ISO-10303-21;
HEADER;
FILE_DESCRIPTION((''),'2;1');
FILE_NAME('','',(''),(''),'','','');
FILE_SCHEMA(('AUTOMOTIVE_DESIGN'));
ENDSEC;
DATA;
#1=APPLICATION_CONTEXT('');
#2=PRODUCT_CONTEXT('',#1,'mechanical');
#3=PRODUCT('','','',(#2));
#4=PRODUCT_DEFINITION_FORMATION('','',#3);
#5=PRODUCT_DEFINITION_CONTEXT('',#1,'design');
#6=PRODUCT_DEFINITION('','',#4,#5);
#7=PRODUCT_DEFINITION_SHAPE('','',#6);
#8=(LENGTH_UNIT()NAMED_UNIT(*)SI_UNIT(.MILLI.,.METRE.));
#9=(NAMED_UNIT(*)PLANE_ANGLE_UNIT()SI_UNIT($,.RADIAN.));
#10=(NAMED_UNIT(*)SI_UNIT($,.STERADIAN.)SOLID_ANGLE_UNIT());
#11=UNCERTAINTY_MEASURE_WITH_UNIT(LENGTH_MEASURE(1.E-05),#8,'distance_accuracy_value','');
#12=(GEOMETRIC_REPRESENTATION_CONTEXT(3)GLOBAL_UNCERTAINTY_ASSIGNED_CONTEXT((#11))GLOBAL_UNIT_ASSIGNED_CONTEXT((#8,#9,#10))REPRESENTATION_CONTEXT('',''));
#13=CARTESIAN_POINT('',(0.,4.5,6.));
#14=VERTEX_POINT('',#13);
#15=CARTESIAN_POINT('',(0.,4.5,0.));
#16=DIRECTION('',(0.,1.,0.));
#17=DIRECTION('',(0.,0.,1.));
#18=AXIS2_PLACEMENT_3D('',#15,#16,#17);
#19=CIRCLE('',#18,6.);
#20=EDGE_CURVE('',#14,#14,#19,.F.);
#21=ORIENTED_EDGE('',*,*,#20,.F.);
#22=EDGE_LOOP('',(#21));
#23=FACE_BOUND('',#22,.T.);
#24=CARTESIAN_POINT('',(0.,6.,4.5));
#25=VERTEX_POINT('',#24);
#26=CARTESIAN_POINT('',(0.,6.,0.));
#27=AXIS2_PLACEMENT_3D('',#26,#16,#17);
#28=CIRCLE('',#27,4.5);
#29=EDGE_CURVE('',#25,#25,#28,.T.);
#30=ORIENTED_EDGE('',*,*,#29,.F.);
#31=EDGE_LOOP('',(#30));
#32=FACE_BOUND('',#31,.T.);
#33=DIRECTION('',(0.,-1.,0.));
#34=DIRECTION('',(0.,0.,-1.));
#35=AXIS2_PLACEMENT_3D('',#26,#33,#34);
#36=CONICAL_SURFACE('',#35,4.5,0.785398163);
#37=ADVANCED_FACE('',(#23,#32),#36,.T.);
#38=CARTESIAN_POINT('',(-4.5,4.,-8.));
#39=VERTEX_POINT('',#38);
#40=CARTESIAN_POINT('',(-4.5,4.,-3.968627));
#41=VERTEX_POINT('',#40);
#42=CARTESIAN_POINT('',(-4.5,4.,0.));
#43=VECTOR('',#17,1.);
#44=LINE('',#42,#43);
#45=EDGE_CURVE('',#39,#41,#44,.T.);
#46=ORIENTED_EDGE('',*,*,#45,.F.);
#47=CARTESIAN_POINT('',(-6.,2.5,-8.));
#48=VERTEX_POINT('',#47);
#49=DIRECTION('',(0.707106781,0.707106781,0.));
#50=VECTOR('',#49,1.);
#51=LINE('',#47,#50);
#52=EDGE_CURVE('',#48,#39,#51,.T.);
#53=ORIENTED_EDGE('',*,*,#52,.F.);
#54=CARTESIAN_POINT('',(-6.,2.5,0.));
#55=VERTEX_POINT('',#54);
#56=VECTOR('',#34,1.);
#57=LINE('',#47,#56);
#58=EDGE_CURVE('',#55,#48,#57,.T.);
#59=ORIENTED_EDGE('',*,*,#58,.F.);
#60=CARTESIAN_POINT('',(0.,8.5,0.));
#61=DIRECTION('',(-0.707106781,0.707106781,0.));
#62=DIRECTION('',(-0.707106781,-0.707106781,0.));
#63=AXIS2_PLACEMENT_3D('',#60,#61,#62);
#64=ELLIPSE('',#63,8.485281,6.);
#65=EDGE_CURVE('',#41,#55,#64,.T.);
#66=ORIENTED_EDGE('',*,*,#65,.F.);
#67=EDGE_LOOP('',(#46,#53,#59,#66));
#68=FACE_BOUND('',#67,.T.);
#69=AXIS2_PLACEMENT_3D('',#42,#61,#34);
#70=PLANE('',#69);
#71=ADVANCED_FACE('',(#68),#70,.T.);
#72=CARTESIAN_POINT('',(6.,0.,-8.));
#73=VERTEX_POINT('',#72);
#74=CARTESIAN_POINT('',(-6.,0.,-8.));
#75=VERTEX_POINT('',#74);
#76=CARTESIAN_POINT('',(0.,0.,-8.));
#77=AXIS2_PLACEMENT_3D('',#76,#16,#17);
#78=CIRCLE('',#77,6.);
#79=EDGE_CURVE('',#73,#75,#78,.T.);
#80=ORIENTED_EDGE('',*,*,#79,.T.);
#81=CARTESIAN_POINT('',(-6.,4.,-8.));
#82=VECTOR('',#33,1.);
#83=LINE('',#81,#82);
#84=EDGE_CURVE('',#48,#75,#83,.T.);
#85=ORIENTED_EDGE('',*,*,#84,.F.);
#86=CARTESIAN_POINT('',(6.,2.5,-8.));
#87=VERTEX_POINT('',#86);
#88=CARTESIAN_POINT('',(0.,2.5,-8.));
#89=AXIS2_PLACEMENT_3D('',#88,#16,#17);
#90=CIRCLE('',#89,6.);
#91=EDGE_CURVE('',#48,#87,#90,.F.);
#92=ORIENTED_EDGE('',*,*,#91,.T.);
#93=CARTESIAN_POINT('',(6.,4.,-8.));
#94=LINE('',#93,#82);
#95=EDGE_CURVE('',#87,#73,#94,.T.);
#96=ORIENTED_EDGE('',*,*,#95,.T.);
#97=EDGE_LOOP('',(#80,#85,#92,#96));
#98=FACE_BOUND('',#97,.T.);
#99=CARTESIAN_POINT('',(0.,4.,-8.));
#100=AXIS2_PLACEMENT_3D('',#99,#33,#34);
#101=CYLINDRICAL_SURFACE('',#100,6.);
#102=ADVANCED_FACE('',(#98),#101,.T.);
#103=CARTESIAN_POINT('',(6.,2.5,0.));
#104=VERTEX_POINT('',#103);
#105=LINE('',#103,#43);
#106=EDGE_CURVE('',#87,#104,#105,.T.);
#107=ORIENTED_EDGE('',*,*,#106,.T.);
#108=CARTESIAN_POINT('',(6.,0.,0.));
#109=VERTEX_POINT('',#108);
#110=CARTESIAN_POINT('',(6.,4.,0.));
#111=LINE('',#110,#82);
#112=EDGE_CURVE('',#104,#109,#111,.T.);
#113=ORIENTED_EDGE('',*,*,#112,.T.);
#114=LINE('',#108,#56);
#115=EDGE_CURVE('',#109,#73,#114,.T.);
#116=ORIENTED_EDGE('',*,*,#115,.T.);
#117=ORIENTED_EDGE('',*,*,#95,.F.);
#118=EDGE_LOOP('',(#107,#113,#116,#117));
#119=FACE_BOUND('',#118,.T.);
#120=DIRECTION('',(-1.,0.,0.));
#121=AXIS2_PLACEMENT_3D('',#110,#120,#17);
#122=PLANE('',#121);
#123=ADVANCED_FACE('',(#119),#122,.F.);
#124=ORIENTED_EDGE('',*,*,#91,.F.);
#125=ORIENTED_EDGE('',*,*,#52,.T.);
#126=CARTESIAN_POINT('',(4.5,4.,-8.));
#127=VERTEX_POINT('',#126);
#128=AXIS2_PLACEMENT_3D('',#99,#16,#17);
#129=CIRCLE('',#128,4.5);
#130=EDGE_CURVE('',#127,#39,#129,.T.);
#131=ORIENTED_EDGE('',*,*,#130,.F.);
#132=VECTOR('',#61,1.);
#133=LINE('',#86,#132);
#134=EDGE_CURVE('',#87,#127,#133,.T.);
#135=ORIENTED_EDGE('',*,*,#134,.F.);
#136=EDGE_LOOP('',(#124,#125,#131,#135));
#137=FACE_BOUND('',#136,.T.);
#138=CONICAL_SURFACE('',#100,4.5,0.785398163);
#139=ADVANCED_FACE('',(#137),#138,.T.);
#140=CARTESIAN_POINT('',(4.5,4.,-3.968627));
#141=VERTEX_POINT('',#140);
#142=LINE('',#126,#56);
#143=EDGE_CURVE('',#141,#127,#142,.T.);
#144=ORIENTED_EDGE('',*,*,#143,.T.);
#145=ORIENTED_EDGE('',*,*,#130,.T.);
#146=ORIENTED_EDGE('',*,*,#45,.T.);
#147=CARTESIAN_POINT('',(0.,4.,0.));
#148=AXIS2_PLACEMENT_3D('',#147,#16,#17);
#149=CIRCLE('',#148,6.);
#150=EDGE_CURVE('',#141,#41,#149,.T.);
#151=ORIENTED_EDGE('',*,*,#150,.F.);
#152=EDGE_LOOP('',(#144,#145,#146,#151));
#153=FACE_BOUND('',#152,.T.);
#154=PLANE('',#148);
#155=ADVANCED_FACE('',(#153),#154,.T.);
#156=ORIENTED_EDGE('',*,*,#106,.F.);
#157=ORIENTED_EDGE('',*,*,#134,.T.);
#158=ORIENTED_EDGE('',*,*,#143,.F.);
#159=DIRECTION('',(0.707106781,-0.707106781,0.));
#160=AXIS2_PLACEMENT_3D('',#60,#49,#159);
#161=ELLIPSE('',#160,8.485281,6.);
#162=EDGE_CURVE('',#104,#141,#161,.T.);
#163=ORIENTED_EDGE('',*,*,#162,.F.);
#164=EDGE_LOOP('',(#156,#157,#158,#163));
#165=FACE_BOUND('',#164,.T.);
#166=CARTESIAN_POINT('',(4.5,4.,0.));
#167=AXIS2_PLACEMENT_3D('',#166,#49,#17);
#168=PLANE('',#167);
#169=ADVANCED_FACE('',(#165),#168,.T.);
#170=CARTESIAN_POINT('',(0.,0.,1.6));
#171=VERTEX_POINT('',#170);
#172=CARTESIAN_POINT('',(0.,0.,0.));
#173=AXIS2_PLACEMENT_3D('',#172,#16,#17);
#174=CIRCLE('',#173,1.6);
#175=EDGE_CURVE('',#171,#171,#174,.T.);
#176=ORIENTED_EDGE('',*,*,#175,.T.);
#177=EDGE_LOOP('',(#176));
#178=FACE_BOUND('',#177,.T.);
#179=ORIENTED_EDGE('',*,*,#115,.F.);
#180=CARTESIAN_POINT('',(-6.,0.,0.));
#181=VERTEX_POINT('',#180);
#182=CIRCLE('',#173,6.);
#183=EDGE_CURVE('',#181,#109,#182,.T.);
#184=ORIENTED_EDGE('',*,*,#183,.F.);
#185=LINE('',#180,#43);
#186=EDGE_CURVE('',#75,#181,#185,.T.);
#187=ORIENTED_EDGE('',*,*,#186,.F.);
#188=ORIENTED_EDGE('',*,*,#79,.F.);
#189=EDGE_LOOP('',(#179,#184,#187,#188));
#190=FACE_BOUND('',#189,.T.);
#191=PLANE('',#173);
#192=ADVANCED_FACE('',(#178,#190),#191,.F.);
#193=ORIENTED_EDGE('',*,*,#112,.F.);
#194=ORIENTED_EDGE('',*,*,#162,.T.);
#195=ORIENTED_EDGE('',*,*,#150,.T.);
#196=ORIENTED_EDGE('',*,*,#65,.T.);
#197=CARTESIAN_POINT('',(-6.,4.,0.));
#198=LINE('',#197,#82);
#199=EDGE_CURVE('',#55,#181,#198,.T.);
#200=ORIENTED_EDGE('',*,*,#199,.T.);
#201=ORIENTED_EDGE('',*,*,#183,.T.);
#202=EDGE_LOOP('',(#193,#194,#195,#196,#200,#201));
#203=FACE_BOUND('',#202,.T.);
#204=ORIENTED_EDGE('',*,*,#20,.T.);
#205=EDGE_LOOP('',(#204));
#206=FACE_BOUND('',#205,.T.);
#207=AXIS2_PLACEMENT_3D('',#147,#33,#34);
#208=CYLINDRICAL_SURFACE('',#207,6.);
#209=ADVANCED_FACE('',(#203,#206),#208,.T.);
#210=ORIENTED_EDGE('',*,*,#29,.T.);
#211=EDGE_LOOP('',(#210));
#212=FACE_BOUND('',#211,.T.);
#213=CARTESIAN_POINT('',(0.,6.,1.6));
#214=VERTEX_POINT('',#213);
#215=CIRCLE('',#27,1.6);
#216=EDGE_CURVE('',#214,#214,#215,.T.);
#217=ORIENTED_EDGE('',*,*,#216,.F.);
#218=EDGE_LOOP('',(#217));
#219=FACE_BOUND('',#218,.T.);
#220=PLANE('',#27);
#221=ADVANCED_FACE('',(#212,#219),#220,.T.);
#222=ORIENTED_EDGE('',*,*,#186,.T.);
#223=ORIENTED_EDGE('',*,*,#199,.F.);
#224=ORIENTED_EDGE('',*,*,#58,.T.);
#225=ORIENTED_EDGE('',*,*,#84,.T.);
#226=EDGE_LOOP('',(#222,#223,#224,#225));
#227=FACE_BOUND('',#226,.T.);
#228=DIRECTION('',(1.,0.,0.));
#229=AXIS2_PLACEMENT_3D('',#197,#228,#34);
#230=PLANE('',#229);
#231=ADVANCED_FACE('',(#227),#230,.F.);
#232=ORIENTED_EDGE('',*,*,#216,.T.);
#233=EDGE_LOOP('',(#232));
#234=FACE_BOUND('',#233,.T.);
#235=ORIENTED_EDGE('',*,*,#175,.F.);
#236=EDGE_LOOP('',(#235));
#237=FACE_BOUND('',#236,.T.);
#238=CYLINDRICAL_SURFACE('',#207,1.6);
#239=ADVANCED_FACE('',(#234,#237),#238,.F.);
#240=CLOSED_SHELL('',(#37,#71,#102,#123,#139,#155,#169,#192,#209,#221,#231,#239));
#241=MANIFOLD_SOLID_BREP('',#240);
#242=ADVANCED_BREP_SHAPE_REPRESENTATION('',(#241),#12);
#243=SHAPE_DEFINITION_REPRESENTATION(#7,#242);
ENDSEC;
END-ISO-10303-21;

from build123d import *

# Parameters (mm, degrees)
SKETCH1_R           = 1.6
BOSS_EXTRUDE1_DEPTH = 4
SKETCH2_R           = 6
SKETCH2_R_2         = 1.6
BOSS_EXTRUDE2_DEPTH = 2
CHAMFER1_SIZE       = 1.5


with BuildPart() as part:
    # Sketch1 → Boss-Extrude1 (new body)
    with BuildSketch(Plane(origin=(0, 0, 0), x_dir=(1, 0, 0), z_dir=(0, 1, 0))):
        with BuildLine():
            Line((-6, 0), (-6, 8))
            ThreePointArc((-6, 8), (0, 14), (6, 8))
            Line((6, 8), (6, 0))
            ThreePointArc((6, 0), (0, -6), (-6, 0))
        make_face()
        with Locations(Location((0, 0, 0), (0, 0, 270))):
            Circle(SKETCH1_R, mode=Mode.SUBTRACT)
    extrude(amount=BOSS_EXTRUDE1_DEPTH)

    # Sketch2 → Boss-Extrude2 (add)
    with BuildSketch(Plane(origin=(0, 4, 0), x_dir=(1, 0, 0), z_dir=(0, 1, 0))):
        Circle(SKETCH2_R)
        with Locations(Location((0, 0, 0), (0, 0, 270))):
            Circle(SKETCH2_R_2, mode=Mode.SUBTRACT)
    extrude(amount=BOSS_EXTRUDE2_DEPTH)

    # Chamfer1
    # the kernel refuses this chamfer: 1.5 mm, written as the material it takes off along each edge
    with BuildSketch(Plane(origin=(0, 6, 0), x_dir=(1, 0, 0), z_dir=(0, 0, 1))) as chamfer1_piece_1:
        Polygon((6, -CHAMFER1_SIZE), (6 - CHAMFER1_SIZE, 0), (6, 0), align=None)
    revolve(axis=Axis((0, 6, 0), (0, 1, 0)), mode=Mode.SUBTRACT)
    with BuildSketch(Plane(origin=(6, 4, -8), x_dir=(0.0274958766105862, -0.9996219169112968, 0), z_dir=(0, 0, 1))) as chamfer1_piece_2_section:
        Polygon((CHAMFER1_SIZE * 0.999621916911, -CHAMFER1_SIZE * 0.0274958766106), (-CHAMFER1_SIZE * 0.0274958766106, -CHAMFER1_SIZE * 0.999621916911), (0, 0), align=None)
    chamfer1_piece_2 = extrude(amount=11.857524482, mode=Mode.PRIVATE)
    chamfer1_piece_2 = chamfer1_piece_2 - Plane(origin=(0, 3.415911746, 0), x_dir=(1, 0, 0), z_dir=(0, -1, 0)) * Cylinder(6, 30, mode=Mode.PRIVATE)
    add(chamfer1_piece_2, mode=Mode.SUBTRACT)
    with BuildSketch(Plane(origin=(0, 4, -8), x_dir=(-1, 0, 0), z_dir=(0, 0, 1))) as chamfer1_piece_3:
        Polygon((6, CHAMFER1_SIZE), (6 - CHAMFER1_SIZE, 0), (6, 0), align=None)
    revolve(axis=Axis((0, 4, -8), (0, -1, 0)), revolution_arc=180, mode=Mode.SUBTRACT)
    with BuildSketch(Plane(origin=(-6, 4, 3.857524482), x_dir=(0.9996219169112969, 0.02749587661058621, 0), z_dir=(0, 0, -1))) as chamfer1_piece_4_section:
        Polygon((CHAMFER1_SIZE * 0.999621916911, CHAMFER1_SIZE * 0.0274958766106), (-CHAMFER1_SIZE * 0.0274958766106, CHAMFER1_SIZE * 0.999621916911), (0, 0), align=None)
    chamfer1_piece_4 = extrude(amount=11.857524482, mode=Mode.PRIVATE)
    chamfer1_piece_4 = chamfer1_piece_4 - Plane(origin=(0, 3.415911747, 0), x_dir=(1, 0, 0), z_dir=(0, -1, 0)) * Cylinder(6, 30, mode=Mode.PRIVATE)
    add(chamfer1_piece_4, mode=Mode.SUBTRACT)


solid = part.part
